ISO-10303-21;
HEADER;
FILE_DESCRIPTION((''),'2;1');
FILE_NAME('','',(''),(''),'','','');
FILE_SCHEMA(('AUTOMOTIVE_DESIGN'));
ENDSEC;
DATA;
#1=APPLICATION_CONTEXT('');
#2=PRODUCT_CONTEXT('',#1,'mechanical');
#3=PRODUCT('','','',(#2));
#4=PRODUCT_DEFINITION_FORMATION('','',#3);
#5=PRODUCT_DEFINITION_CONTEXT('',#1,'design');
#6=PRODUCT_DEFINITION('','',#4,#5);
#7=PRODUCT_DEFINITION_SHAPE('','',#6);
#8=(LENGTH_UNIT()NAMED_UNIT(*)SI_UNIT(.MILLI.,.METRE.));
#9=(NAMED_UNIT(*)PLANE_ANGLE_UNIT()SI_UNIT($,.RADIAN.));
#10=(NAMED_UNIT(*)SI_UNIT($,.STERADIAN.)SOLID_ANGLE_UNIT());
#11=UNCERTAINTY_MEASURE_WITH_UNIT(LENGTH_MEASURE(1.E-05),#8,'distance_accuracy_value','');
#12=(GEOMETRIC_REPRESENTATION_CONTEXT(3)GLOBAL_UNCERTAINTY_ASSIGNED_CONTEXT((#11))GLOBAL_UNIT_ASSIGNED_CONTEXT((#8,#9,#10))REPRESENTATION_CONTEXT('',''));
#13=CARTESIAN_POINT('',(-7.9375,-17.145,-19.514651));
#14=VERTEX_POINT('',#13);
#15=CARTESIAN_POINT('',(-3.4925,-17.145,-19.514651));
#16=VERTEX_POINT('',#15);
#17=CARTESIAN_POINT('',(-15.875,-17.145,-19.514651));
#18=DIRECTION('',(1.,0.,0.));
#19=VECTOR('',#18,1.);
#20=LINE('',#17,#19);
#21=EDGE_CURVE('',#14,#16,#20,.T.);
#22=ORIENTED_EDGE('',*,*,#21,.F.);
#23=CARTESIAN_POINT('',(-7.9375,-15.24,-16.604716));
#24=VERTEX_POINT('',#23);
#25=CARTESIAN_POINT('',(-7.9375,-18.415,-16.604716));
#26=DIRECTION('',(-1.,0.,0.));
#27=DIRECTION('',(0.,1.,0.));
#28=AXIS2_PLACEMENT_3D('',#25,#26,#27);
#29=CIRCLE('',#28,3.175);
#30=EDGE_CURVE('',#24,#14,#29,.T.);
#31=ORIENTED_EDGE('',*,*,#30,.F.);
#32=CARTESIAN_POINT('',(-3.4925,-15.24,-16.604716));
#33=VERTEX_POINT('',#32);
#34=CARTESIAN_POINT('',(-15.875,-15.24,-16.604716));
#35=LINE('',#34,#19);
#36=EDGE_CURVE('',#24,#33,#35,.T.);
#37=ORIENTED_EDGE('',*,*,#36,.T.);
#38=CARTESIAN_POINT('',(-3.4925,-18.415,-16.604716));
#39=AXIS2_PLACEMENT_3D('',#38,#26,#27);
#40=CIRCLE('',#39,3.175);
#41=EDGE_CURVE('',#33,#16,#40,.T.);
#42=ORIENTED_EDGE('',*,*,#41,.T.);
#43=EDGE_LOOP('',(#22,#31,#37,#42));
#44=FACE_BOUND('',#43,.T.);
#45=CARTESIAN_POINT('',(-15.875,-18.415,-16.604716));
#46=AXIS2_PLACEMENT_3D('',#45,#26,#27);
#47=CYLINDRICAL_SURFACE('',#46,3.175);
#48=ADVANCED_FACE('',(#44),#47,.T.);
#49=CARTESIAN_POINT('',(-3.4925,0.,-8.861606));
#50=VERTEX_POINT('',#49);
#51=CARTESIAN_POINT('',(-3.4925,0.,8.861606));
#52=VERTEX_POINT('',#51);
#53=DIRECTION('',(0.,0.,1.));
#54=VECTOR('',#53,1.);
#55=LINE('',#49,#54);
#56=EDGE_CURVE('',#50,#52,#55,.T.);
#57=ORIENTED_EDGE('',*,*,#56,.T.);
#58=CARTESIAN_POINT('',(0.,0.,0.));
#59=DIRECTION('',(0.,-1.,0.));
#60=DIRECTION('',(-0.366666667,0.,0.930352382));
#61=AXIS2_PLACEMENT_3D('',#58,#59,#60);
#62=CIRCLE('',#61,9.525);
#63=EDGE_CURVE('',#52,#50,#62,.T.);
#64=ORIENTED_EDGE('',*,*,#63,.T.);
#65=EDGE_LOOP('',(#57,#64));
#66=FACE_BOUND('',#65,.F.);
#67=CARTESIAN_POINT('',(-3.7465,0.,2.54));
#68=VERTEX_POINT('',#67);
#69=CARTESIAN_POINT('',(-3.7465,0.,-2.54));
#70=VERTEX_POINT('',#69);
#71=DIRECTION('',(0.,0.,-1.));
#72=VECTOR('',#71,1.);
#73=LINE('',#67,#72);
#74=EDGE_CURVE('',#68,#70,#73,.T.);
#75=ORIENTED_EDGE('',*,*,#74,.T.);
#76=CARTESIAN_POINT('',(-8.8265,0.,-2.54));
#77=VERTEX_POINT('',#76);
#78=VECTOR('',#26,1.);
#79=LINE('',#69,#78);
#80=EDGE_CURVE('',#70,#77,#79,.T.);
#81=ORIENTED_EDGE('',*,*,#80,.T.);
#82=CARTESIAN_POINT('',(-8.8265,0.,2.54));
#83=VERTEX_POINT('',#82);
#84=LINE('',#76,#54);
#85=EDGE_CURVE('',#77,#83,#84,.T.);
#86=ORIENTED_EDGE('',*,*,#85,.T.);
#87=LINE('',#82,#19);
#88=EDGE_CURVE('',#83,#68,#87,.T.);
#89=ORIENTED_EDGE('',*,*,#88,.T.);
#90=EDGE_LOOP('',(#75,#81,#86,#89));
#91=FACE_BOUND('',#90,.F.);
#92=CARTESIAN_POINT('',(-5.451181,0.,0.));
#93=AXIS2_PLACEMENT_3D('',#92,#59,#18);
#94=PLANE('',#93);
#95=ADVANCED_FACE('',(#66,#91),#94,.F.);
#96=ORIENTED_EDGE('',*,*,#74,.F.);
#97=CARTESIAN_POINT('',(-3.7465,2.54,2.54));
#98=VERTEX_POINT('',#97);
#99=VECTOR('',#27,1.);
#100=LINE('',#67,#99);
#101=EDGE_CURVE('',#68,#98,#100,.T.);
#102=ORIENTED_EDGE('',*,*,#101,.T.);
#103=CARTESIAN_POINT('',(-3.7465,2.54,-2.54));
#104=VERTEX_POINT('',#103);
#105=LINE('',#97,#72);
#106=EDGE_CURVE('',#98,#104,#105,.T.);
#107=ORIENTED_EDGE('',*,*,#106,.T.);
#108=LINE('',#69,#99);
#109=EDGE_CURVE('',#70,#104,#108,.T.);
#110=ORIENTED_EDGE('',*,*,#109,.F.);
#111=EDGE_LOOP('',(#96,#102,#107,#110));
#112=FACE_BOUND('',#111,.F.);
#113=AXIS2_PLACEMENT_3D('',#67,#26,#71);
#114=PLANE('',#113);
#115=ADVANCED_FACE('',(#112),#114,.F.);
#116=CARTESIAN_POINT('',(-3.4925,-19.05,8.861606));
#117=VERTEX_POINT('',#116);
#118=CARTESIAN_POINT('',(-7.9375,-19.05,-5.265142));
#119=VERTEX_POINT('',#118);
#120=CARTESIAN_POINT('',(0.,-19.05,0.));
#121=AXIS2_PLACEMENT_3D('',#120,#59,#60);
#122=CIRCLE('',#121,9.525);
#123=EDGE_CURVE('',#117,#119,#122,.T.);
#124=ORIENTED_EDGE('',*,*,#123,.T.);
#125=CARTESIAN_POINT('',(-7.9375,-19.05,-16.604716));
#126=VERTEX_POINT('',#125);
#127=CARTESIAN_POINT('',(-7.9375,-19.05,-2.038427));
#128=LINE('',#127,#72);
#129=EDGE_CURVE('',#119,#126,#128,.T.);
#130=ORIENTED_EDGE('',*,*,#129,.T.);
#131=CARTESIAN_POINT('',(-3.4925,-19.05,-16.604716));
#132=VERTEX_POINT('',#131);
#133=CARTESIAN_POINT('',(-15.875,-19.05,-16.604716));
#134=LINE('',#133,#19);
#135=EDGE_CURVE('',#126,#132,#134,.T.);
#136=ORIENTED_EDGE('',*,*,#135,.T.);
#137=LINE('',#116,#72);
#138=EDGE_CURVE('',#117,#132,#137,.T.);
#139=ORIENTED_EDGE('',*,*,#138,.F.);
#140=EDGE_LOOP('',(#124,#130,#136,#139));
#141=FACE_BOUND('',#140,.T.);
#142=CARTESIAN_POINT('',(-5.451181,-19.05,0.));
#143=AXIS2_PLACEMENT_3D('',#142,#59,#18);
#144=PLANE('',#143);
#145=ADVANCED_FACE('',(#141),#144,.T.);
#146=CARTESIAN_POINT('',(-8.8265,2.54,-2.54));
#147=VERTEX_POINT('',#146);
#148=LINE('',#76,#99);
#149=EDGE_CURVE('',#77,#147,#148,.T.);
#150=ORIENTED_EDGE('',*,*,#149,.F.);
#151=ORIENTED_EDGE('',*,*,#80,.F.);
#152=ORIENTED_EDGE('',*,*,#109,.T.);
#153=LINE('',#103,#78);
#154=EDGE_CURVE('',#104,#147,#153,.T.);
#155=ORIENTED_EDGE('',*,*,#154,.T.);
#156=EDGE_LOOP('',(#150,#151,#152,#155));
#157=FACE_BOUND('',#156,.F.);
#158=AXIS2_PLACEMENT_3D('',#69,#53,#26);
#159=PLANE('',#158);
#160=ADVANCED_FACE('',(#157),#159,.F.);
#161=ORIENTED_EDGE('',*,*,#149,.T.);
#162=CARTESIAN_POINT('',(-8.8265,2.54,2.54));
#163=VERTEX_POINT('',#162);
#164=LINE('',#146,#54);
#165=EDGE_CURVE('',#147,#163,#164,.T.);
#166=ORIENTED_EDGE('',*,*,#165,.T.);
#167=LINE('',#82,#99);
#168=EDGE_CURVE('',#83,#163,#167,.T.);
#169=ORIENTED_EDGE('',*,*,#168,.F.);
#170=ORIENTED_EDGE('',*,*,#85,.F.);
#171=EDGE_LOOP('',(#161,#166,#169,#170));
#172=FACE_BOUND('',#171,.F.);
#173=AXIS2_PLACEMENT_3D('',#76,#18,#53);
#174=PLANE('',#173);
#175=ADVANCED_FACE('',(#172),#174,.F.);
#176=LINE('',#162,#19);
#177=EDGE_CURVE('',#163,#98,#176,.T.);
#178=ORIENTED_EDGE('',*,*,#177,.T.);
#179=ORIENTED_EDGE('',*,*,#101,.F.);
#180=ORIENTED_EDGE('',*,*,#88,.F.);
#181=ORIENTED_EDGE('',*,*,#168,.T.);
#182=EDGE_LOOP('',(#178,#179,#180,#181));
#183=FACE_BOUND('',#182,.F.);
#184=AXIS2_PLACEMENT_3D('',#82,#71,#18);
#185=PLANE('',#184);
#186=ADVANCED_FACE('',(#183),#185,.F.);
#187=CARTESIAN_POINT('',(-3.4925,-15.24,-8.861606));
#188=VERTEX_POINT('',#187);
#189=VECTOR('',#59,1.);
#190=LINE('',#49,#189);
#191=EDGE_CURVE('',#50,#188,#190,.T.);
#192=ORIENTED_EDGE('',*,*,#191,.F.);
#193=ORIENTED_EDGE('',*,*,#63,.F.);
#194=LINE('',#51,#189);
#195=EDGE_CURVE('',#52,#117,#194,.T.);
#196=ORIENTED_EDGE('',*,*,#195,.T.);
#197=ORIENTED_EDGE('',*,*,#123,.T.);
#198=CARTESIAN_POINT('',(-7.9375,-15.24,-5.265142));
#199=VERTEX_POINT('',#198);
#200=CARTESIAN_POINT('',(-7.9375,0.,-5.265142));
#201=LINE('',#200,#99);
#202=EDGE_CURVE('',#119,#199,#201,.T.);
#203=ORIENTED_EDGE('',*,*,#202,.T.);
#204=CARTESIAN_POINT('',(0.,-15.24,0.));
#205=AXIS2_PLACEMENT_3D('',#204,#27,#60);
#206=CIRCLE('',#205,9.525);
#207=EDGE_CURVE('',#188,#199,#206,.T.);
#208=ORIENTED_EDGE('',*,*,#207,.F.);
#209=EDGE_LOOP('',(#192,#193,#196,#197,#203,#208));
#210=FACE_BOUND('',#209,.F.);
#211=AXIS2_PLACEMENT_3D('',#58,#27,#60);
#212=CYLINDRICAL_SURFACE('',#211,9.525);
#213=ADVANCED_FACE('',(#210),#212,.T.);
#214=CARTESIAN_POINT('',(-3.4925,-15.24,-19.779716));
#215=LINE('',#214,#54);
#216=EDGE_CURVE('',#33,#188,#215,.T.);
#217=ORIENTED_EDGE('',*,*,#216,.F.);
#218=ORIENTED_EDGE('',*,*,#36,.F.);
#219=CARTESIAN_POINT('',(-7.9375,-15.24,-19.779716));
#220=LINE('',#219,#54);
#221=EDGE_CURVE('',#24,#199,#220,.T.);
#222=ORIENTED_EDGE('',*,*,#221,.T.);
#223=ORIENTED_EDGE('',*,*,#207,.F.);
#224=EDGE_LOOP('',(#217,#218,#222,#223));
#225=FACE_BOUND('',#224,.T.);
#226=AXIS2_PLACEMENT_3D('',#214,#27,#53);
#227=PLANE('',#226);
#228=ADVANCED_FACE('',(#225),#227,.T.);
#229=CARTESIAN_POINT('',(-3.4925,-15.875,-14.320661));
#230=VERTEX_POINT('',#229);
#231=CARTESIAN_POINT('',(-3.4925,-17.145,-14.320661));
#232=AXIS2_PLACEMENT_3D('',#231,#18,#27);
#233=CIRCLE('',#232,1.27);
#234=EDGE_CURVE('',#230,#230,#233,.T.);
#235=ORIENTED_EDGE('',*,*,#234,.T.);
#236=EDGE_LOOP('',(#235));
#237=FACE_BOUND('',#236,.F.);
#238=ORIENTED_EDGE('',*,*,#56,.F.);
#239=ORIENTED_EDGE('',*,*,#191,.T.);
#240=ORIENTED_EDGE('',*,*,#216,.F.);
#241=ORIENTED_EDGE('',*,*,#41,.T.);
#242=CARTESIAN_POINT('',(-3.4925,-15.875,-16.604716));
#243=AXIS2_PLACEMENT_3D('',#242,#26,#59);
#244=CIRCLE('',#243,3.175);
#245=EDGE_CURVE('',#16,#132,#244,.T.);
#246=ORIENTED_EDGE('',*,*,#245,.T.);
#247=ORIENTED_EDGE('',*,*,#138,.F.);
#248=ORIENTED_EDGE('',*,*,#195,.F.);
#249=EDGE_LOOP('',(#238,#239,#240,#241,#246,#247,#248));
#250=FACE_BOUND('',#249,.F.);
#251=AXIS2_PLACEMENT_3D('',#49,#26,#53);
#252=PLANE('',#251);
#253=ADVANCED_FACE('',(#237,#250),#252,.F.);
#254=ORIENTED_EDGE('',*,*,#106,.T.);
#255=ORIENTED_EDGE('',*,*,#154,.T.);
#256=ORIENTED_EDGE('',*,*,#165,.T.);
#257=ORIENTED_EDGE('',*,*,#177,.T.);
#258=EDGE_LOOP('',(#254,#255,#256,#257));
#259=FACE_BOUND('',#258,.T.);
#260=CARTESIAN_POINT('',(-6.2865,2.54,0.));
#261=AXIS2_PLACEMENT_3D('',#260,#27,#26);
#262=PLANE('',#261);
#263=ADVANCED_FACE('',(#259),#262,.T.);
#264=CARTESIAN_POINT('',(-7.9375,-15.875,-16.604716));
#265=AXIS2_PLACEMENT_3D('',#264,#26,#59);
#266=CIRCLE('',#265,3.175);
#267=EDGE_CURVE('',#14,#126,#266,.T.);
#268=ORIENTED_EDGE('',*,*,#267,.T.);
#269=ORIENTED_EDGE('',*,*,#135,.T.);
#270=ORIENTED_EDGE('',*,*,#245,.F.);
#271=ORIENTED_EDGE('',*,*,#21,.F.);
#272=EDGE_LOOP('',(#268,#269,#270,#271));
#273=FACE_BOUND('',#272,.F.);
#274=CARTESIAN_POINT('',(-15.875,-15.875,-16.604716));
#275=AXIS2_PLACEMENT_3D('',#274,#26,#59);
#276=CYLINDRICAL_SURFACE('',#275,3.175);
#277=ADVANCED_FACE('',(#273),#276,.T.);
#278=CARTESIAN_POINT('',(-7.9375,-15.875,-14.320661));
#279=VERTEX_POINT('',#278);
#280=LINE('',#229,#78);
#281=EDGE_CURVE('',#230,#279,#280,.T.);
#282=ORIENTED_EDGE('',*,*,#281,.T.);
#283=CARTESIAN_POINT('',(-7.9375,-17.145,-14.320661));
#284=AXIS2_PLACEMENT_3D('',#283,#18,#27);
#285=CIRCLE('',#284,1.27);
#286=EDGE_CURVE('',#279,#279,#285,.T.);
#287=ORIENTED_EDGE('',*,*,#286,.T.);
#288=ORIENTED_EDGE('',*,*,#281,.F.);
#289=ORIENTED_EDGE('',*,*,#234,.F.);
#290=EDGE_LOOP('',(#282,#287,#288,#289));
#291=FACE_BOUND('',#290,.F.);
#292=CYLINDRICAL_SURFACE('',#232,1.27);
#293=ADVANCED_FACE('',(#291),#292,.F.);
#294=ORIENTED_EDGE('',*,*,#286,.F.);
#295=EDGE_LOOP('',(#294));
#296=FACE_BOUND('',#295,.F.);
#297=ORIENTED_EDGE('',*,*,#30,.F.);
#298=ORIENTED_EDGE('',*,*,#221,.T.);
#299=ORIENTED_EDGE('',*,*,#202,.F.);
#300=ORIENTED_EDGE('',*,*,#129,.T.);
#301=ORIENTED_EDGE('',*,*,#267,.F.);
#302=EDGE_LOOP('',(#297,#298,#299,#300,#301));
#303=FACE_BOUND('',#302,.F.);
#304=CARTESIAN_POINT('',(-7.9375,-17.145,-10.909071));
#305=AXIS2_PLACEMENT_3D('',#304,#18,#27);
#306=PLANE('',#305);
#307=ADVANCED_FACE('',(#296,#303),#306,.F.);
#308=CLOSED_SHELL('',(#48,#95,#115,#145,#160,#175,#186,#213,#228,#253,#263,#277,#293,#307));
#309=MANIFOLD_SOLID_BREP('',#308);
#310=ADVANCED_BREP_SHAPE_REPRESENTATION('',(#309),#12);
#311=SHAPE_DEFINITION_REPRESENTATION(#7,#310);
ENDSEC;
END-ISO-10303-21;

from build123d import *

# Parameters (mm, degrees)
F1_DEPTH    = 19.05
F3_DEPTH    = 2.54
F5_DEPTH    = 4.445
F6_R        = 1.27
F7_DEPTH    = 25.4
F8_T1_DEPTH = 20.32


# Not quite as in the source:
# - a fillet or chamfer that OpenCascade refuses, or shapes differently, is made with other operations: its cross-section is extruded or revolved along the edge and cut away or added


with BuildPart() as f1:
    # F0 (on Front) → F1 (new body)
    with BuildSketch(Plane.XZ):
        with BuildLine():
            Line((-3.4925, 0), (-3.4925, 8.861606443))
            ThreePointArc((-3.4925, 8.861606443), (-9.525, 0), (-3.4925, -8.861606443))
            Line((-3.4925, -8.861606443), (-3.4925, 0))
        make_face()
    extrude(amount=F1_DEPTH)

    # F2 (on face) → F3 (join)
    with BuildSketch(Plane(origin=(0, 0, 0), x_dir=(-1, 0, 0), z_dir=(0, 1, 0))):
        Polygon((3.7465, 2.54), (3.7465, 0), (3.7465, -2.54), (8.8265, -2.54), (8.8265, 2.54), align=None)
    extrude(amount=F3_DEPTH)

    # F4 (on face) → F5 (join)
    with BuildSketch(Plane.YZ.offset(-3.4925)):
        Polygon((-19.05, -2.0384269301), (-19.05, -8.861606443), (-19.05, -19.779715687), (-15.24, -19.779715687), (-15.24, -8.861606443), (-15.24, -2.0384269301), align=None)
    extrude(amount=-F5_DEPTH)

    # F6 (on face) → F7 (cut)
    with BuildSketch(Plane.YZ.offset(-3.4925)):
        with Locations((-17.145, -14.320661065)):
            Circle(F6_R)
    extrude(amount=-F7_DEPTH, mode=Mode.SUBTRACT)

    # F8: fillet of radius 3.175 on 2 edges, made by hand

    # F8_s2 → F8_t1 (cut)
    with BuildSketch(Plane.YZ.offset(-15.875)):
        with BuildLine():
            ThreePointArc((-15.24, -16.604715687), (-16.1699359697, -18.8497797173), (-18.415, -19.779715687))
            Line((-18.415, -19.779715687), (-15.24, -19.779715687))
            Line((-15.24, -19.779715687), (-15.24, -16.604715687))
        make_face()
        with BuildLine():
            ThreePointArc((-19.05, -16.604715687), (-18.1200640303, -18.8497797173), (-15.875, -19.779715687))
            Line((-15.875, -19.779715687), (-19.05, -19.779715687))
            Line((-19.05, -19.779715687), (-19.05, -16.604715687))
        make_face()
    extrude(amount=F8_T1_DEPTH, mode=Mode.SUBTRACT)


solid = f1.part
